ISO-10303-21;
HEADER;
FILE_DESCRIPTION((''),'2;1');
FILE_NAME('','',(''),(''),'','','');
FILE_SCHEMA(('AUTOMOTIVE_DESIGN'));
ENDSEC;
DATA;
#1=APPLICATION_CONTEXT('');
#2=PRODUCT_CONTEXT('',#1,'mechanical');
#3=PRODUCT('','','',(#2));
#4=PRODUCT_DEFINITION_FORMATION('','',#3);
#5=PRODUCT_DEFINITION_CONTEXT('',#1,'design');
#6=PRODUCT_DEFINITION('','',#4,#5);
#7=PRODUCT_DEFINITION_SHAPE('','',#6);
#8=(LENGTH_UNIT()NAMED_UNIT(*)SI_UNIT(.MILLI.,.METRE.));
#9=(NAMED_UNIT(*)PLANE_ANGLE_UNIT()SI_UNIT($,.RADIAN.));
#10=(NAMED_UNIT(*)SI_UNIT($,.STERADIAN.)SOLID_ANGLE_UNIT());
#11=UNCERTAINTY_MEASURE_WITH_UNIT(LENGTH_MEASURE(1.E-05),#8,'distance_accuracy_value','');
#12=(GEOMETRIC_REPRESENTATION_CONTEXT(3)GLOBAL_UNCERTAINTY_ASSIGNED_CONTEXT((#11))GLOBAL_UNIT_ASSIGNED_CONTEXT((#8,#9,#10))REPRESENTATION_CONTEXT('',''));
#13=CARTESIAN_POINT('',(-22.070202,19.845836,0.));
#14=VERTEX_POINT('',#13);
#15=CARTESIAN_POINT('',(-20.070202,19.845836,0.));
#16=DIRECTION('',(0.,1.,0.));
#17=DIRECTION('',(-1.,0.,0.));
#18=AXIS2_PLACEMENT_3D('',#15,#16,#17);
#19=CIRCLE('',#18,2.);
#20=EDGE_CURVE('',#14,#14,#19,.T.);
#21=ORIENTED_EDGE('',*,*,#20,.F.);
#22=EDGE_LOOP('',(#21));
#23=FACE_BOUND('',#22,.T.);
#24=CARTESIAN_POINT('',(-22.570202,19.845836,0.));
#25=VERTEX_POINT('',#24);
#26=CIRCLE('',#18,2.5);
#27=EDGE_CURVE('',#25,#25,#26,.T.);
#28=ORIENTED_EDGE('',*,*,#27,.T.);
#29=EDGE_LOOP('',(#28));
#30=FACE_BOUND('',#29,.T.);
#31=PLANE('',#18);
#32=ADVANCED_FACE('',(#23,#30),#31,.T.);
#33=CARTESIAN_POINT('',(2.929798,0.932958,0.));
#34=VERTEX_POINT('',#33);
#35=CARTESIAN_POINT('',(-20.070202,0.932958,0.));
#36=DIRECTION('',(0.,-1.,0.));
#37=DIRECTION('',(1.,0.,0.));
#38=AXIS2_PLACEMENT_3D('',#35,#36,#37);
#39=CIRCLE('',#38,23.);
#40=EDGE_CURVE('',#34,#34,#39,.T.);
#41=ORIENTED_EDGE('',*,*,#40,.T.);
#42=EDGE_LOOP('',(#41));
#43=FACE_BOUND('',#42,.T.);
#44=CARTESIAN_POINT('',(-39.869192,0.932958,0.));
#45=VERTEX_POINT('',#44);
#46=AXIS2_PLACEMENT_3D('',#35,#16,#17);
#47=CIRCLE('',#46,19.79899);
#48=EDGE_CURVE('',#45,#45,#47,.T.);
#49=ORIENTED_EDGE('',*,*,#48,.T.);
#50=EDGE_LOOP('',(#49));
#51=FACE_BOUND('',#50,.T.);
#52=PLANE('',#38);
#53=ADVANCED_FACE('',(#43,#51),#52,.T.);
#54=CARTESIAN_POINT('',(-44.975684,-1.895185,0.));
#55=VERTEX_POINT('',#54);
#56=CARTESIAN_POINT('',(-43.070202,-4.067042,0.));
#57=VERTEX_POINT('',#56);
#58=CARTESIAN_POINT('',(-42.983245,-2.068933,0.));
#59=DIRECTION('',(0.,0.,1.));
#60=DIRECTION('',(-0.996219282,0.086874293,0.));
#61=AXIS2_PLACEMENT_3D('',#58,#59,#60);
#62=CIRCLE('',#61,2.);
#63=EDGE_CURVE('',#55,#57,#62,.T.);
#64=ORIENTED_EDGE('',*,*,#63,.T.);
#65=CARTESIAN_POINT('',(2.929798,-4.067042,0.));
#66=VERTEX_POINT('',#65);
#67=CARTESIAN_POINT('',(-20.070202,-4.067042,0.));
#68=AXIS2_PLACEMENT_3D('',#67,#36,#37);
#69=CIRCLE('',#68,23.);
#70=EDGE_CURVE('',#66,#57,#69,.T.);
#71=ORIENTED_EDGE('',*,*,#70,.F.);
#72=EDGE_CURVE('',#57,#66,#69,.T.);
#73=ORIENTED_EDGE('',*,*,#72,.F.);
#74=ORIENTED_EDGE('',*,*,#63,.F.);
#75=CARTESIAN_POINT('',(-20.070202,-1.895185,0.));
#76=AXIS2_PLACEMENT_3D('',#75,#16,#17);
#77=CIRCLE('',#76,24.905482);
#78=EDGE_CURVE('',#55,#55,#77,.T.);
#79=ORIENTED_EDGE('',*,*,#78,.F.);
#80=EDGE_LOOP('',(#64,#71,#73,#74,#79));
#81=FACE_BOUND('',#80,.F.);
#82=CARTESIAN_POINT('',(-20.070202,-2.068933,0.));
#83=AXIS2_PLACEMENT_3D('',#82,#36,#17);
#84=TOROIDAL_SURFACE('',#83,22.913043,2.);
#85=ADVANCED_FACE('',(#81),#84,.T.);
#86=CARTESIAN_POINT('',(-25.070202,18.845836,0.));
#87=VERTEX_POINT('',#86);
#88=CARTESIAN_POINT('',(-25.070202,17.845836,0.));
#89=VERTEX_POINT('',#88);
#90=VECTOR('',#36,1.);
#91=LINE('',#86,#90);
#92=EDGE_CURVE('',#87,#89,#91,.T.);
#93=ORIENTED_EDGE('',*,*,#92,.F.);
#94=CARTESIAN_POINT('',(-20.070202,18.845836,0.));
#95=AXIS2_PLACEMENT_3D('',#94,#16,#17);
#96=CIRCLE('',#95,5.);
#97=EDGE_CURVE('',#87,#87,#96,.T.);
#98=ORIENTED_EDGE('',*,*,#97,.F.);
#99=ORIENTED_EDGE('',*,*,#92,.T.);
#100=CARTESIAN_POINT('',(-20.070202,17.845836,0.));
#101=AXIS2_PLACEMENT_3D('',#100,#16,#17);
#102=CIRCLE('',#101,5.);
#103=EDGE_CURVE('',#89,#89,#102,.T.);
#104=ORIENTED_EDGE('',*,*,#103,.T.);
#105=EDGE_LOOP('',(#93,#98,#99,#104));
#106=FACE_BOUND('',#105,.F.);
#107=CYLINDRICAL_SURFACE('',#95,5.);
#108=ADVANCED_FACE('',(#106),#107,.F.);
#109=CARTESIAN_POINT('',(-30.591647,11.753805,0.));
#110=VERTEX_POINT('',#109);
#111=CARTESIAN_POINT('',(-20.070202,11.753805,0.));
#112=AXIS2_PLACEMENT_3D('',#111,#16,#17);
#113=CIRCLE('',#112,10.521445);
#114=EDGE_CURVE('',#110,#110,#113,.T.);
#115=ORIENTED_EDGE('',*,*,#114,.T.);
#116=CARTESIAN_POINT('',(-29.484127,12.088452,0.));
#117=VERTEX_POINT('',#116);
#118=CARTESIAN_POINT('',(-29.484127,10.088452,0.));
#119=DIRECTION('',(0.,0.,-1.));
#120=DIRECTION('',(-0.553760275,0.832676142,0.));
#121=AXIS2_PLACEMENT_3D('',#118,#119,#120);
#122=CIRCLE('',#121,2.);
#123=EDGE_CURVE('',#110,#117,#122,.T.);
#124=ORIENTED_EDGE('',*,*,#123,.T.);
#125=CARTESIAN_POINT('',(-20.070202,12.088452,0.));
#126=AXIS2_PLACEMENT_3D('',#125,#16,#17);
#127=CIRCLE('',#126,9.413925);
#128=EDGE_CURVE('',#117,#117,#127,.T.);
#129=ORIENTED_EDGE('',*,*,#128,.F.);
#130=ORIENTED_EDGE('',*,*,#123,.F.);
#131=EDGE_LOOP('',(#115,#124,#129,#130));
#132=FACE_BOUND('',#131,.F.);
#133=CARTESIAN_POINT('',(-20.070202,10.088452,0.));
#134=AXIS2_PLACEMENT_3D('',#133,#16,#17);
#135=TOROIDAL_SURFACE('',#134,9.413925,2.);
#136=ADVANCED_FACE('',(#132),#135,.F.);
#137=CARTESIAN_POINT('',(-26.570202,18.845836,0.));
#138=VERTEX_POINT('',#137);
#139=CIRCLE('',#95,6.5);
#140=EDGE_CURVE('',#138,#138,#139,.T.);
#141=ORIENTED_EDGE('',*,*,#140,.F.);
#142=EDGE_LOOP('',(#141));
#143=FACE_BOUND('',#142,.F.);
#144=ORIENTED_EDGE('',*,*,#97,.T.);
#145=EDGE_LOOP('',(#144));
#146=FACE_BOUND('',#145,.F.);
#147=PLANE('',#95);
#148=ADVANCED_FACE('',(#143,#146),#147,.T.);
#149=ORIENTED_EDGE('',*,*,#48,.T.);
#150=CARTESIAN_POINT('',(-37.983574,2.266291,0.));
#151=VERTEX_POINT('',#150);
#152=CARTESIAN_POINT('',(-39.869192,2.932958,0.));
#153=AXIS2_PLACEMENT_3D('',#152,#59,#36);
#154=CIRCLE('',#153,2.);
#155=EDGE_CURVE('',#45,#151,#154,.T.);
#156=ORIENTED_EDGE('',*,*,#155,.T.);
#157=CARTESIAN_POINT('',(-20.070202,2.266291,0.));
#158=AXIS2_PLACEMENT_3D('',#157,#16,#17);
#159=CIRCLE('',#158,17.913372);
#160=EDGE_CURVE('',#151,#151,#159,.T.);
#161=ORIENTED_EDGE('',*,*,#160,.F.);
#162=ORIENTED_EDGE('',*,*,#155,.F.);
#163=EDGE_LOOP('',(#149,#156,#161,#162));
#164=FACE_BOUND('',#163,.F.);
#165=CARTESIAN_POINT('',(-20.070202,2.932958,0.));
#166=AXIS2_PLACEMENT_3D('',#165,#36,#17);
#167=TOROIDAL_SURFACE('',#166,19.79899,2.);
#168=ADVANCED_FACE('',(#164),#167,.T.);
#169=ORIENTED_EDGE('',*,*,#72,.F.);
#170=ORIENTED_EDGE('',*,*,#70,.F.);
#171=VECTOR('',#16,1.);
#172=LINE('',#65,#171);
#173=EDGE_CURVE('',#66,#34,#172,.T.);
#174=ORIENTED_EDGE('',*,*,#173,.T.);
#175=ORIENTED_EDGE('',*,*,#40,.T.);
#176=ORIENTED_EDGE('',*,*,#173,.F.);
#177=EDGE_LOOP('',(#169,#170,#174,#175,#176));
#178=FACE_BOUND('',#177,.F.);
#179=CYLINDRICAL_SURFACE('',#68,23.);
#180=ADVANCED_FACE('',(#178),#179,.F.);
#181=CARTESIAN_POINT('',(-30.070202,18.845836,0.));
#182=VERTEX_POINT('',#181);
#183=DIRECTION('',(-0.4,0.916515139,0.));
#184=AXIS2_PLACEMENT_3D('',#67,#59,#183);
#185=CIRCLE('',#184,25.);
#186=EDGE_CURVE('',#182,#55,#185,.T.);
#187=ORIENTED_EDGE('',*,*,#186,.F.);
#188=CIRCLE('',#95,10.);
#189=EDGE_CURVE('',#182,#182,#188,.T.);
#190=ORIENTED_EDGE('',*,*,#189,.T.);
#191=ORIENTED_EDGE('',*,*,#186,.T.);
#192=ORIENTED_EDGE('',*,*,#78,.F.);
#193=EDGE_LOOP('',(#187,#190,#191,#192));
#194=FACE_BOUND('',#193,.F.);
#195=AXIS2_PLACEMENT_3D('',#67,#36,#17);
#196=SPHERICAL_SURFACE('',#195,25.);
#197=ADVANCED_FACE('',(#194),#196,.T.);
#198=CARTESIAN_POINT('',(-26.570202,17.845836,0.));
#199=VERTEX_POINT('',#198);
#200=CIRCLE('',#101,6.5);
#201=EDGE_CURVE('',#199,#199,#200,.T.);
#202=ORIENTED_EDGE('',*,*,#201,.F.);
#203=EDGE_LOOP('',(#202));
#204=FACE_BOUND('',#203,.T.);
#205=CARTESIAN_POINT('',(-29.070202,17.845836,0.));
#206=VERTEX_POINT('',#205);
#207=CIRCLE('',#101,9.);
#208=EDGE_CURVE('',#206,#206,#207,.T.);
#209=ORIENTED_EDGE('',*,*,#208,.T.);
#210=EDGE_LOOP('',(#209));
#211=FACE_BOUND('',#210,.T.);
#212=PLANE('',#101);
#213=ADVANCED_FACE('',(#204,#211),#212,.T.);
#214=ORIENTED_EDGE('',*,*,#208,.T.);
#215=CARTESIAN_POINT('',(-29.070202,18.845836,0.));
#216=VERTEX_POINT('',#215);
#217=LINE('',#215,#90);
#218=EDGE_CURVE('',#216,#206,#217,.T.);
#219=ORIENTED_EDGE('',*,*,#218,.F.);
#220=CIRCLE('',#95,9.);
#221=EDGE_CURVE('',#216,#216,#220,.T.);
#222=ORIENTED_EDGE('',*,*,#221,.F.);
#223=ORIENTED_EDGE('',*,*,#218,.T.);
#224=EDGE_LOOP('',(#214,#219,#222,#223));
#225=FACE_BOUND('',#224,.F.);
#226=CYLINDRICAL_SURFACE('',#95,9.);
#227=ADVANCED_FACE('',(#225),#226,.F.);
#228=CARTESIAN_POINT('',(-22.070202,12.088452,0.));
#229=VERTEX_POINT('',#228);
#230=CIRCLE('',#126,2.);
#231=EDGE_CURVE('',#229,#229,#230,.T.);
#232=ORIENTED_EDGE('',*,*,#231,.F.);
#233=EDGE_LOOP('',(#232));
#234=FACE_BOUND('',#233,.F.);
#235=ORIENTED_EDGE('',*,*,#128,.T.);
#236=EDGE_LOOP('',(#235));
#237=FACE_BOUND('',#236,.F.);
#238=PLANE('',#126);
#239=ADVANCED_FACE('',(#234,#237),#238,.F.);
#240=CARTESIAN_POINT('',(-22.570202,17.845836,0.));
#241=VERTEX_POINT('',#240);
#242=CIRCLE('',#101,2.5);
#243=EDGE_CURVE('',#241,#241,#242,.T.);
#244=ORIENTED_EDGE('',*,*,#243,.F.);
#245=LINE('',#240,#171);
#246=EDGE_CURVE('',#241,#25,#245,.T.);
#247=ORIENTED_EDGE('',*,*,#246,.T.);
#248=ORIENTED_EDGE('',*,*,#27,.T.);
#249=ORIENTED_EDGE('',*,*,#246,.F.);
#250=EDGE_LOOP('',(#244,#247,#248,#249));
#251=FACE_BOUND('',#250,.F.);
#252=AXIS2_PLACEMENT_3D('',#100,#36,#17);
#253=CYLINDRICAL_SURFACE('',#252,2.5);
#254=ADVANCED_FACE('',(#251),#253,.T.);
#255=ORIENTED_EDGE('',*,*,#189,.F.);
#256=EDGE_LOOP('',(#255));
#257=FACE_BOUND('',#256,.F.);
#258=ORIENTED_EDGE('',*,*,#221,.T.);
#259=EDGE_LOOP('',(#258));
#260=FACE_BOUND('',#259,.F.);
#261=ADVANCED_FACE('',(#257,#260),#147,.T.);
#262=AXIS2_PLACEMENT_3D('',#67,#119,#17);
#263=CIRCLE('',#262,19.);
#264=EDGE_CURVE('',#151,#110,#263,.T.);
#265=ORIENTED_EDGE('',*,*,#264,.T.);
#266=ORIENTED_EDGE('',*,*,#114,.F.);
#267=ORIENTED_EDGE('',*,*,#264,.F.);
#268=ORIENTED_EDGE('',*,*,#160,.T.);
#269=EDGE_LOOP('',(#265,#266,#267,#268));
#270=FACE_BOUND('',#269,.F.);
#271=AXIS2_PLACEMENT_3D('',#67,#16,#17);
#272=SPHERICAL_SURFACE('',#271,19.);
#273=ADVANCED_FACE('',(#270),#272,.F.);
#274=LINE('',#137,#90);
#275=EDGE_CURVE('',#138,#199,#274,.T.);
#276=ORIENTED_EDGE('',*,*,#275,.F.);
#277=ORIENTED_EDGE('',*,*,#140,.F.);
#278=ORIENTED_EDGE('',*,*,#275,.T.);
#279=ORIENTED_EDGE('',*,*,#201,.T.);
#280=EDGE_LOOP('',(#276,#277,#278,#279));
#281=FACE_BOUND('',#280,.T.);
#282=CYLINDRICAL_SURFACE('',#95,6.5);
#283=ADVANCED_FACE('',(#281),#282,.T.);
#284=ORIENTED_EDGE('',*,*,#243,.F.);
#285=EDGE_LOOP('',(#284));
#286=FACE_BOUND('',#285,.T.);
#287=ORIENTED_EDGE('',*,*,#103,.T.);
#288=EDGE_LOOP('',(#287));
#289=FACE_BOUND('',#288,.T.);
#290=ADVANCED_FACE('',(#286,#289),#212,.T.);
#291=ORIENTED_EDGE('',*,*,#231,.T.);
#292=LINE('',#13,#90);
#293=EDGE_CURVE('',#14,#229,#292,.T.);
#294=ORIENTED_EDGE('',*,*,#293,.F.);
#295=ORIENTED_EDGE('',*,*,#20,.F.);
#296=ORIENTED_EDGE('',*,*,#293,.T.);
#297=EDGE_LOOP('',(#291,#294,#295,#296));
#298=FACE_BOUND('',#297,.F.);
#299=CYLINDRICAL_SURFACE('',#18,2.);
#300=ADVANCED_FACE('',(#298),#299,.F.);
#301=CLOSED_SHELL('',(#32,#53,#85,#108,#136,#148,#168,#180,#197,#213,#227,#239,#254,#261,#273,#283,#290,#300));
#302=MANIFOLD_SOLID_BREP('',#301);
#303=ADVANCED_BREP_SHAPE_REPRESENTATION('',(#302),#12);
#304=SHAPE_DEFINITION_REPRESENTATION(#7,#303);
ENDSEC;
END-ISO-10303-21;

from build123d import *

# Parameters (mm, degrees)
F2_R      = 9
F2_R_2    = 6.5
F3_DEPTH  = 1
F4_R      = 5
F5_DEPTH  = 1
F6_R      = 23
F7_DEPTH  = 5
F8_R      = 2.5
F9_DEPTH  = 2
F10_R     = 2
F11_DEPTH = 25


# Not quite as in the source:
# - a fillet or chamfer that OpenCascade refuses, or shapes differently, is made with other operations: its cross-section is extruded or revolved along the edge and cut away or added


with BuildPart() as f1:
    # F0 (on Top) → F1 (revolve)
    with BuildSketch(Plane.XY):
        with BuildLine():
            ThreePointArc((-30.0702019767, 18.8458363465), (-40.98670264, 9.6260218093), (-45.0702019767, -4.0670421283))
            Line((-45.0702019767, -4.0670421283), (-39.0702019767, -4.0670421283))
            ThreePointArc((-39.0702019767, -4.0670421283), (-36.6683946494, 5.1795788761), (-30.0702019767, 12.0884522931))
            ThreePointArc((-30.0702019767, 12.0884522931), (-25.2685481557, 14.2080008813), (-20.0702019767, 14.9329578717))
            Line((-20.0702019767, 14.9329578717), (-20.0702019767, 18.8458363465))
            Line((-20.0702019767, 18.8458363465), (-30.0702019767, 18.8458363465))
        make_face()
        with BuildLine():
            ThreePointArc((-20.0702019767, 14.9329578717), (-25.2685481557, 14.2080008813), (-30.0702019767, 12.0884522931))
            Line((-30.0702019767, 12.0884522931), (-20.0702019767, 12.0884522931))
            Line((-20.0702019767, 12.0884522931), (-20.0702019767, 14.9329578717))
        make_face()
    revolve(axis=Axis((-20.0702019767, 9.4528388078, 0), (0, 1, 0)))

    # F2 (on face) → F3 (cut)
    with BuildSketch(Plane(origin=(0, 18.8458363465, 0), x_dir=(-1, 0, 0), z_dir=(0, 1, 0))):
        with Locations((20.0702019767, 0)):
            Circle(F2_R)
        with Locations((20.0702019767, 0)):
            Circle(F2_R_2, mode=Mode.SUBTRACT)
    extrude(amount=-F3_DEPTH, mode=Mode.SUBTRACT)

    # F4 (on face) → F5 (cut)
    with BuildSketch(Plane(origin=(0, 18.8458363465, 0), x_dir=(-1, 0, 0), z_dir=(0, 1, 0))):
        with Locations((20.0702019767, 0)):
            Circle(F4_R)
    extrude(amount=-F5_DEPTH, mode=Mode.SUBTRACT)

    # F6 (on face) → F7 (cut)
    with BuildSketch(Plane.XZ.offset(4.0670421283)):
        with Locations((-20.0702019767, 0)):
            Circle(F6_R)
    extrude(amount=-F7_DEPTH, mode=Mode.SUBTRACT)

    # F8 (on face) → F9 (join)
    with BuildSketch(Plane(origin=(0, 17.8458363465, 0), x_dir=(-1, 0, 0), z_dir=(0, 1, 0))):
        with Locations((20.0702019767, 0)):
            Circle(F8_R)
    extrude(amount=F9_DEPTH)

    # F10 (on face) → F11 (cut)
    with BuildSketch(Plane(origin=(0, 19.8458363465, 0), x_dir=(-1, 0, 0), z_dir=(0, 1, 0))):
        with Locations((20.0702019767, 0)):
            Circle(F10_R)
    extrude(amount=-F11_DEPTH, mode=Mode.SUBTRACT)

    # F12: fillet of radius 2 on 3 edges, made by hand

    # F12_s1 → F12_t2 (revolve)
    with BuildSketch(Plane.XY):
        with BuildLine():
            ThreePointArc((-30.5916471957, 11.753804578), (-30.0626140836, 12.0029632711), (-29.4841266463, 12.0884522931))
            Line((-29.4841266463, 12.0884522931), (-30.0702019767, 12.0884522931))
            ThreePointArc((-30.0702019767, 12.0884522931), (-30.3322887889, 11.9232541247), (-30.5916471957, 11.753804578))
        make_face()
    revolve(axis=Axis((-20.0702019767, 12.0884522931, 0), (0, 1, 0)))

    # F12_s3 → F12_t4 (revolve, cut)
    with BuildSketch(Plane.XY):
        with BuildLine():
            ThreePointArc((-44.9756840183, -1.895184795), (-44.4866456176, -3.3879435981), (-43.0702019767, -4.0670421283))
            Line((-43.0702019767, -4.0670421283), (-45.0702019767, -4.0670421283))
            ThreePointArc((-45.0702019767, -4.0670421283), (-45.0465613095, -2.9800856066), (-44.9756840183, -1.895184795))
        make_face()
    revolve(axis=Axis((-20.0702019767, -4.0670421283, 0), (0, 1, 0)), mode=Mode.SUBTRACT)

    # F12_s5 → F12_t6 (revolve, cut)
    with BuildSketch(Plane.XY):
        with BuildLine():
            ThreePointArc((-39.8691918499, 0.9329578717), (-38.7144913115, 1.2999647098), (-37.9835737667, 2.266291205))
            ThreePointArc((-37.9835737667, 2.266291205), (-38.2042977916, 1.6034577592), (-38.4005047565, 0.9329578717))
            Line((-38.4005047565, 0.9329578717), (-39.8691918499, 0.9329578717))
        make_face()
    revolve(axis=Axis((-20.0702019767, 0.9329578717, 0), (0, 1, 0)), mode=Mode.SUBTRACT)


solid = f1.part
